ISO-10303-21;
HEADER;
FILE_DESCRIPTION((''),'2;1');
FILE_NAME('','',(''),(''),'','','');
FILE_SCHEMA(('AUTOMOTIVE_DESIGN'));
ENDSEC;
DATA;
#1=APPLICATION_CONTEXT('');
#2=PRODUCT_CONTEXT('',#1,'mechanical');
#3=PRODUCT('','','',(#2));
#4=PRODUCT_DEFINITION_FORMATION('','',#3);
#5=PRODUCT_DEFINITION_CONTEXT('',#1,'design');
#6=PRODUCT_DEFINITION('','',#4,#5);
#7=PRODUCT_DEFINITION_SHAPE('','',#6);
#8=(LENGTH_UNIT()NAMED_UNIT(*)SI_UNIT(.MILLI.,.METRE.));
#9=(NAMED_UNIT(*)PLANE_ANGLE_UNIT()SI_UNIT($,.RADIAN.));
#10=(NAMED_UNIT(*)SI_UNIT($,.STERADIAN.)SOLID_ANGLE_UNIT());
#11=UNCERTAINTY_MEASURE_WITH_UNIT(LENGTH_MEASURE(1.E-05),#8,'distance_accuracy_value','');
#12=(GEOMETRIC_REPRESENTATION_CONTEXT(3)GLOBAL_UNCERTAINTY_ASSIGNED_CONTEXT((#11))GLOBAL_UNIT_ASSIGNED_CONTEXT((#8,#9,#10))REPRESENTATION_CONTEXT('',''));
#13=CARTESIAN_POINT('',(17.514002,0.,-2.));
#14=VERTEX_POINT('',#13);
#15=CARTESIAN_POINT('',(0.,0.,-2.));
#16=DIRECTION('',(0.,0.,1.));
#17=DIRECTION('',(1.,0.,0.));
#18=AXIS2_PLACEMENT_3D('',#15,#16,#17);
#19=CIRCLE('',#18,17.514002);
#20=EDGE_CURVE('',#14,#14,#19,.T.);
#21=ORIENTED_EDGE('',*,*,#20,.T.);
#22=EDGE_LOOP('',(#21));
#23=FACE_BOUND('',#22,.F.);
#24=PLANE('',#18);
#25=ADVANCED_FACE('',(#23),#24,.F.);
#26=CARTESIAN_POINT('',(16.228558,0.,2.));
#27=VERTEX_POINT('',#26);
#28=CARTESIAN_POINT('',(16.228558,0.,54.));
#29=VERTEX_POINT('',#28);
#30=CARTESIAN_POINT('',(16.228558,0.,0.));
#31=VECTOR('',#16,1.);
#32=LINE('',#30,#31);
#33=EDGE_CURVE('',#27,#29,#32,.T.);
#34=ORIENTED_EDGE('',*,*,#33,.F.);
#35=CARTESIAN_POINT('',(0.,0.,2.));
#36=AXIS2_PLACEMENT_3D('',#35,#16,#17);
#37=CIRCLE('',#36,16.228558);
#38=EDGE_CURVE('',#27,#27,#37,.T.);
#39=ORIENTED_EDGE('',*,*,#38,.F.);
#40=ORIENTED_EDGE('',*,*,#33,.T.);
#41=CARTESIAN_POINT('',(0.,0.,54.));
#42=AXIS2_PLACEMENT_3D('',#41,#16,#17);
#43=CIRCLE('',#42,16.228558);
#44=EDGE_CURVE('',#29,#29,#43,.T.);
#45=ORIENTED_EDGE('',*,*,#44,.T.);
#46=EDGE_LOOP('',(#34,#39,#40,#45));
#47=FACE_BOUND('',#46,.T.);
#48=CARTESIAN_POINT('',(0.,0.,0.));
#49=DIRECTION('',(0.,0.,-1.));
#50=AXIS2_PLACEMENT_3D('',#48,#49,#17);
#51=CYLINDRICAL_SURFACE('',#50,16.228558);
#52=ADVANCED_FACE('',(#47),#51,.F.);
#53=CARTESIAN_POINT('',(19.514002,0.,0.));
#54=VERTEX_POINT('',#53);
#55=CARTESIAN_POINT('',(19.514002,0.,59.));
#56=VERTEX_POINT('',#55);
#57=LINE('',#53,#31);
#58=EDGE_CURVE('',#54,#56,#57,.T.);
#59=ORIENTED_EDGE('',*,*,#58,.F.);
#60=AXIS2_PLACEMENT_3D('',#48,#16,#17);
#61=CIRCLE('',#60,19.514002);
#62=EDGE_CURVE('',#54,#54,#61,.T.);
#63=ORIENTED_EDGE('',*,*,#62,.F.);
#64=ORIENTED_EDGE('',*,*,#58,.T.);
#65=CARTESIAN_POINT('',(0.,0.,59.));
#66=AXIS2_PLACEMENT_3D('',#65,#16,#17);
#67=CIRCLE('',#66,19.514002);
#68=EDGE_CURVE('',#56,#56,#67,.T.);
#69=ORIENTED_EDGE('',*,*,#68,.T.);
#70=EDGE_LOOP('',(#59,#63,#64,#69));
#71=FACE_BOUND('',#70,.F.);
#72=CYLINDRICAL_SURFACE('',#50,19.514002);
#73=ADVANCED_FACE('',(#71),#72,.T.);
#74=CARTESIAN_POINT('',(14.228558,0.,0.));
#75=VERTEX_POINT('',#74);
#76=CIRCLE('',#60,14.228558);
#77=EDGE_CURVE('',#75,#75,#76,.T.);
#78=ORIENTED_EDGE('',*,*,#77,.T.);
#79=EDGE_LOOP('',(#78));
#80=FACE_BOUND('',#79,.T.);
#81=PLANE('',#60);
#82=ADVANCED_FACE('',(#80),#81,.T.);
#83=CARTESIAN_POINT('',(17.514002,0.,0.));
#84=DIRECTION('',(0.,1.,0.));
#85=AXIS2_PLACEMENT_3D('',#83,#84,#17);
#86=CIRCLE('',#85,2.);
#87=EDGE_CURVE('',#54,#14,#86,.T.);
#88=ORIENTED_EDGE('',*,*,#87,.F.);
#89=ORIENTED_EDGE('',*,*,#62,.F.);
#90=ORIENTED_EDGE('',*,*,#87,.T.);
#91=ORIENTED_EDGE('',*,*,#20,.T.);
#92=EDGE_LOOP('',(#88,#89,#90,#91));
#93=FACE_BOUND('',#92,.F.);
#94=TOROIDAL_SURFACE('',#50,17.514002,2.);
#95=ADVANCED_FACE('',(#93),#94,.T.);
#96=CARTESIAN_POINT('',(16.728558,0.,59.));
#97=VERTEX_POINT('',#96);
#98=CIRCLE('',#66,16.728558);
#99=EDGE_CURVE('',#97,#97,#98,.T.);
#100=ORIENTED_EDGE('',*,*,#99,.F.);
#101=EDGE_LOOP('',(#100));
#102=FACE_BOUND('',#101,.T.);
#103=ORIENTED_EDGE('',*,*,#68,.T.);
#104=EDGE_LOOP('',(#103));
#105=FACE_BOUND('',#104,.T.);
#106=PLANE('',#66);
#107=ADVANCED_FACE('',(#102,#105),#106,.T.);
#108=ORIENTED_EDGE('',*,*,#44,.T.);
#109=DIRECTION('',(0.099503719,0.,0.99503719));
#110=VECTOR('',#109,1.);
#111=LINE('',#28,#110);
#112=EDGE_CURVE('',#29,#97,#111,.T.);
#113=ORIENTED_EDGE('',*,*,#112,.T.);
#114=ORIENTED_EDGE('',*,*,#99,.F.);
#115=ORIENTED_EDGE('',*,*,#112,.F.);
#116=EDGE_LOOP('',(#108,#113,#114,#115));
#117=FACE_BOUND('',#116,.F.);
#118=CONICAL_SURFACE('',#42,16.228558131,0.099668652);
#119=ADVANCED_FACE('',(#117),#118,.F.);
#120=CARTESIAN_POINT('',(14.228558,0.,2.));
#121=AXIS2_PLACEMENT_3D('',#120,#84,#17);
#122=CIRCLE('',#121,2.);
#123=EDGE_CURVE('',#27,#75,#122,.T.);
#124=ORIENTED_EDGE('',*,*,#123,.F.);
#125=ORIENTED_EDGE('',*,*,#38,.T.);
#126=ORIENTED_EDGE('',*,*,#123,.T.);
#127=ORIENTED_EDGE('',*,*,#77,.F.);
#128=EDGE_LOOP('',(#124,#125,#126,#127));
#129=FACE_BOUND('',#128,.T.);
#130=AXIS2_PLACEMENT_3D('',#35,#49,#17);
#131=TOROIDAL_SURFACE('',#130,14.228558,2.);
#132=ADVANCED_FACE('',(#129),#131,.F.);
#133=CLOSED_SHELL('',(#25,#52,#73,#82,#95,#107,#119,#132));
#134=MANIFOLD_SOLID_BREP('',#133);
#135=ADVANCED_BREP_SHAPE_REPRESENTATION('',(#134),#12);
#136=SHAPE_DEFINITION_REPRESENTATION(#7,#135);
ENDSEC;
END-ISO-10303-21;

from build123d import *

# Parameters (mm, degrees)
F0_R     = 19.5140017551
F0_R_2   = 16.2285581311
F1_DEPTH = 2
F2_DEPTH = 59
F4_SIZE2 = 0.5
F4_SIZE  = 5


# Not quite as in the source:
# - a fillet or chamfer that OpenCascade refuses, or shapes differently, is made with other operations: its cross-section is extruded or revolved along the edge and cut away or added


with BuildPart() as f1:
    # F0 (on Top) → F1 (new body)
    with BuildSketch(Plane.XY):
        Circle(F0_R)
        Circle(F0_R_2, mode=Mode.SUBTRACT)
        Circle(F0_R_2)
    extrude(amount=-F1_DEPTH)

    # F0 (on Top) → F2 (join)
    with BuildSketch(Plane.XY):
        Circle(F0_R)
        Circle(F0_R_2, mode=Mode.SUBTRACT)
    extrude(amount=F2_DEPTH)

    # F3: fillet of radius 2 on 2 edges, made by hand

    # F3_s1 → F3_t2 (revolve, cut)
    with BuildSketch(Plane.XZ):
        with BuildLine():
            ThreePointArc((19.5140017551, 0), (18.9282153175, -1.4142135624), (17.5140017551, -2))
            Line((17.5140017551, -2), (19.5140017551, -2))
            Line((19.5140017551, -2), (19.5140017551, 0))
        make_face()
    revolve(axis=Axis((0, 0, -2), (0, 0, 1)), mode=Mode.SUBTRACT)

    # F3_s3 → F3_t4 (revolve)
    with BuildSketch(Plane.XZ):
        with BuildLine():
            ThreePointArc((16.2285581311, 2), (15.6427716934, 0.5857864376), (14.2285581311, 0))
            Line((14.2285581311, 0), (16.2285581311, 0))
            Line((16.2285581311, 0), (16.2285581311, 2))
        make_face()
    revolve(axis=Axis((0, 0, 0), (0, 0, 1)))

    # F4
    f4_edges = [f1.edges().sort_by_distance(p)[0] for p in [
        (-16.228558, 0, 59),
    ]]
    f4_side = f1.faces().sort_by_distance((-16.228558, 0, 30.5))[0]
    chamfer(f4_edges, length=F4_SIZE, length2=F4_SIZE2, reference=f4_side)


solid = f1.part
